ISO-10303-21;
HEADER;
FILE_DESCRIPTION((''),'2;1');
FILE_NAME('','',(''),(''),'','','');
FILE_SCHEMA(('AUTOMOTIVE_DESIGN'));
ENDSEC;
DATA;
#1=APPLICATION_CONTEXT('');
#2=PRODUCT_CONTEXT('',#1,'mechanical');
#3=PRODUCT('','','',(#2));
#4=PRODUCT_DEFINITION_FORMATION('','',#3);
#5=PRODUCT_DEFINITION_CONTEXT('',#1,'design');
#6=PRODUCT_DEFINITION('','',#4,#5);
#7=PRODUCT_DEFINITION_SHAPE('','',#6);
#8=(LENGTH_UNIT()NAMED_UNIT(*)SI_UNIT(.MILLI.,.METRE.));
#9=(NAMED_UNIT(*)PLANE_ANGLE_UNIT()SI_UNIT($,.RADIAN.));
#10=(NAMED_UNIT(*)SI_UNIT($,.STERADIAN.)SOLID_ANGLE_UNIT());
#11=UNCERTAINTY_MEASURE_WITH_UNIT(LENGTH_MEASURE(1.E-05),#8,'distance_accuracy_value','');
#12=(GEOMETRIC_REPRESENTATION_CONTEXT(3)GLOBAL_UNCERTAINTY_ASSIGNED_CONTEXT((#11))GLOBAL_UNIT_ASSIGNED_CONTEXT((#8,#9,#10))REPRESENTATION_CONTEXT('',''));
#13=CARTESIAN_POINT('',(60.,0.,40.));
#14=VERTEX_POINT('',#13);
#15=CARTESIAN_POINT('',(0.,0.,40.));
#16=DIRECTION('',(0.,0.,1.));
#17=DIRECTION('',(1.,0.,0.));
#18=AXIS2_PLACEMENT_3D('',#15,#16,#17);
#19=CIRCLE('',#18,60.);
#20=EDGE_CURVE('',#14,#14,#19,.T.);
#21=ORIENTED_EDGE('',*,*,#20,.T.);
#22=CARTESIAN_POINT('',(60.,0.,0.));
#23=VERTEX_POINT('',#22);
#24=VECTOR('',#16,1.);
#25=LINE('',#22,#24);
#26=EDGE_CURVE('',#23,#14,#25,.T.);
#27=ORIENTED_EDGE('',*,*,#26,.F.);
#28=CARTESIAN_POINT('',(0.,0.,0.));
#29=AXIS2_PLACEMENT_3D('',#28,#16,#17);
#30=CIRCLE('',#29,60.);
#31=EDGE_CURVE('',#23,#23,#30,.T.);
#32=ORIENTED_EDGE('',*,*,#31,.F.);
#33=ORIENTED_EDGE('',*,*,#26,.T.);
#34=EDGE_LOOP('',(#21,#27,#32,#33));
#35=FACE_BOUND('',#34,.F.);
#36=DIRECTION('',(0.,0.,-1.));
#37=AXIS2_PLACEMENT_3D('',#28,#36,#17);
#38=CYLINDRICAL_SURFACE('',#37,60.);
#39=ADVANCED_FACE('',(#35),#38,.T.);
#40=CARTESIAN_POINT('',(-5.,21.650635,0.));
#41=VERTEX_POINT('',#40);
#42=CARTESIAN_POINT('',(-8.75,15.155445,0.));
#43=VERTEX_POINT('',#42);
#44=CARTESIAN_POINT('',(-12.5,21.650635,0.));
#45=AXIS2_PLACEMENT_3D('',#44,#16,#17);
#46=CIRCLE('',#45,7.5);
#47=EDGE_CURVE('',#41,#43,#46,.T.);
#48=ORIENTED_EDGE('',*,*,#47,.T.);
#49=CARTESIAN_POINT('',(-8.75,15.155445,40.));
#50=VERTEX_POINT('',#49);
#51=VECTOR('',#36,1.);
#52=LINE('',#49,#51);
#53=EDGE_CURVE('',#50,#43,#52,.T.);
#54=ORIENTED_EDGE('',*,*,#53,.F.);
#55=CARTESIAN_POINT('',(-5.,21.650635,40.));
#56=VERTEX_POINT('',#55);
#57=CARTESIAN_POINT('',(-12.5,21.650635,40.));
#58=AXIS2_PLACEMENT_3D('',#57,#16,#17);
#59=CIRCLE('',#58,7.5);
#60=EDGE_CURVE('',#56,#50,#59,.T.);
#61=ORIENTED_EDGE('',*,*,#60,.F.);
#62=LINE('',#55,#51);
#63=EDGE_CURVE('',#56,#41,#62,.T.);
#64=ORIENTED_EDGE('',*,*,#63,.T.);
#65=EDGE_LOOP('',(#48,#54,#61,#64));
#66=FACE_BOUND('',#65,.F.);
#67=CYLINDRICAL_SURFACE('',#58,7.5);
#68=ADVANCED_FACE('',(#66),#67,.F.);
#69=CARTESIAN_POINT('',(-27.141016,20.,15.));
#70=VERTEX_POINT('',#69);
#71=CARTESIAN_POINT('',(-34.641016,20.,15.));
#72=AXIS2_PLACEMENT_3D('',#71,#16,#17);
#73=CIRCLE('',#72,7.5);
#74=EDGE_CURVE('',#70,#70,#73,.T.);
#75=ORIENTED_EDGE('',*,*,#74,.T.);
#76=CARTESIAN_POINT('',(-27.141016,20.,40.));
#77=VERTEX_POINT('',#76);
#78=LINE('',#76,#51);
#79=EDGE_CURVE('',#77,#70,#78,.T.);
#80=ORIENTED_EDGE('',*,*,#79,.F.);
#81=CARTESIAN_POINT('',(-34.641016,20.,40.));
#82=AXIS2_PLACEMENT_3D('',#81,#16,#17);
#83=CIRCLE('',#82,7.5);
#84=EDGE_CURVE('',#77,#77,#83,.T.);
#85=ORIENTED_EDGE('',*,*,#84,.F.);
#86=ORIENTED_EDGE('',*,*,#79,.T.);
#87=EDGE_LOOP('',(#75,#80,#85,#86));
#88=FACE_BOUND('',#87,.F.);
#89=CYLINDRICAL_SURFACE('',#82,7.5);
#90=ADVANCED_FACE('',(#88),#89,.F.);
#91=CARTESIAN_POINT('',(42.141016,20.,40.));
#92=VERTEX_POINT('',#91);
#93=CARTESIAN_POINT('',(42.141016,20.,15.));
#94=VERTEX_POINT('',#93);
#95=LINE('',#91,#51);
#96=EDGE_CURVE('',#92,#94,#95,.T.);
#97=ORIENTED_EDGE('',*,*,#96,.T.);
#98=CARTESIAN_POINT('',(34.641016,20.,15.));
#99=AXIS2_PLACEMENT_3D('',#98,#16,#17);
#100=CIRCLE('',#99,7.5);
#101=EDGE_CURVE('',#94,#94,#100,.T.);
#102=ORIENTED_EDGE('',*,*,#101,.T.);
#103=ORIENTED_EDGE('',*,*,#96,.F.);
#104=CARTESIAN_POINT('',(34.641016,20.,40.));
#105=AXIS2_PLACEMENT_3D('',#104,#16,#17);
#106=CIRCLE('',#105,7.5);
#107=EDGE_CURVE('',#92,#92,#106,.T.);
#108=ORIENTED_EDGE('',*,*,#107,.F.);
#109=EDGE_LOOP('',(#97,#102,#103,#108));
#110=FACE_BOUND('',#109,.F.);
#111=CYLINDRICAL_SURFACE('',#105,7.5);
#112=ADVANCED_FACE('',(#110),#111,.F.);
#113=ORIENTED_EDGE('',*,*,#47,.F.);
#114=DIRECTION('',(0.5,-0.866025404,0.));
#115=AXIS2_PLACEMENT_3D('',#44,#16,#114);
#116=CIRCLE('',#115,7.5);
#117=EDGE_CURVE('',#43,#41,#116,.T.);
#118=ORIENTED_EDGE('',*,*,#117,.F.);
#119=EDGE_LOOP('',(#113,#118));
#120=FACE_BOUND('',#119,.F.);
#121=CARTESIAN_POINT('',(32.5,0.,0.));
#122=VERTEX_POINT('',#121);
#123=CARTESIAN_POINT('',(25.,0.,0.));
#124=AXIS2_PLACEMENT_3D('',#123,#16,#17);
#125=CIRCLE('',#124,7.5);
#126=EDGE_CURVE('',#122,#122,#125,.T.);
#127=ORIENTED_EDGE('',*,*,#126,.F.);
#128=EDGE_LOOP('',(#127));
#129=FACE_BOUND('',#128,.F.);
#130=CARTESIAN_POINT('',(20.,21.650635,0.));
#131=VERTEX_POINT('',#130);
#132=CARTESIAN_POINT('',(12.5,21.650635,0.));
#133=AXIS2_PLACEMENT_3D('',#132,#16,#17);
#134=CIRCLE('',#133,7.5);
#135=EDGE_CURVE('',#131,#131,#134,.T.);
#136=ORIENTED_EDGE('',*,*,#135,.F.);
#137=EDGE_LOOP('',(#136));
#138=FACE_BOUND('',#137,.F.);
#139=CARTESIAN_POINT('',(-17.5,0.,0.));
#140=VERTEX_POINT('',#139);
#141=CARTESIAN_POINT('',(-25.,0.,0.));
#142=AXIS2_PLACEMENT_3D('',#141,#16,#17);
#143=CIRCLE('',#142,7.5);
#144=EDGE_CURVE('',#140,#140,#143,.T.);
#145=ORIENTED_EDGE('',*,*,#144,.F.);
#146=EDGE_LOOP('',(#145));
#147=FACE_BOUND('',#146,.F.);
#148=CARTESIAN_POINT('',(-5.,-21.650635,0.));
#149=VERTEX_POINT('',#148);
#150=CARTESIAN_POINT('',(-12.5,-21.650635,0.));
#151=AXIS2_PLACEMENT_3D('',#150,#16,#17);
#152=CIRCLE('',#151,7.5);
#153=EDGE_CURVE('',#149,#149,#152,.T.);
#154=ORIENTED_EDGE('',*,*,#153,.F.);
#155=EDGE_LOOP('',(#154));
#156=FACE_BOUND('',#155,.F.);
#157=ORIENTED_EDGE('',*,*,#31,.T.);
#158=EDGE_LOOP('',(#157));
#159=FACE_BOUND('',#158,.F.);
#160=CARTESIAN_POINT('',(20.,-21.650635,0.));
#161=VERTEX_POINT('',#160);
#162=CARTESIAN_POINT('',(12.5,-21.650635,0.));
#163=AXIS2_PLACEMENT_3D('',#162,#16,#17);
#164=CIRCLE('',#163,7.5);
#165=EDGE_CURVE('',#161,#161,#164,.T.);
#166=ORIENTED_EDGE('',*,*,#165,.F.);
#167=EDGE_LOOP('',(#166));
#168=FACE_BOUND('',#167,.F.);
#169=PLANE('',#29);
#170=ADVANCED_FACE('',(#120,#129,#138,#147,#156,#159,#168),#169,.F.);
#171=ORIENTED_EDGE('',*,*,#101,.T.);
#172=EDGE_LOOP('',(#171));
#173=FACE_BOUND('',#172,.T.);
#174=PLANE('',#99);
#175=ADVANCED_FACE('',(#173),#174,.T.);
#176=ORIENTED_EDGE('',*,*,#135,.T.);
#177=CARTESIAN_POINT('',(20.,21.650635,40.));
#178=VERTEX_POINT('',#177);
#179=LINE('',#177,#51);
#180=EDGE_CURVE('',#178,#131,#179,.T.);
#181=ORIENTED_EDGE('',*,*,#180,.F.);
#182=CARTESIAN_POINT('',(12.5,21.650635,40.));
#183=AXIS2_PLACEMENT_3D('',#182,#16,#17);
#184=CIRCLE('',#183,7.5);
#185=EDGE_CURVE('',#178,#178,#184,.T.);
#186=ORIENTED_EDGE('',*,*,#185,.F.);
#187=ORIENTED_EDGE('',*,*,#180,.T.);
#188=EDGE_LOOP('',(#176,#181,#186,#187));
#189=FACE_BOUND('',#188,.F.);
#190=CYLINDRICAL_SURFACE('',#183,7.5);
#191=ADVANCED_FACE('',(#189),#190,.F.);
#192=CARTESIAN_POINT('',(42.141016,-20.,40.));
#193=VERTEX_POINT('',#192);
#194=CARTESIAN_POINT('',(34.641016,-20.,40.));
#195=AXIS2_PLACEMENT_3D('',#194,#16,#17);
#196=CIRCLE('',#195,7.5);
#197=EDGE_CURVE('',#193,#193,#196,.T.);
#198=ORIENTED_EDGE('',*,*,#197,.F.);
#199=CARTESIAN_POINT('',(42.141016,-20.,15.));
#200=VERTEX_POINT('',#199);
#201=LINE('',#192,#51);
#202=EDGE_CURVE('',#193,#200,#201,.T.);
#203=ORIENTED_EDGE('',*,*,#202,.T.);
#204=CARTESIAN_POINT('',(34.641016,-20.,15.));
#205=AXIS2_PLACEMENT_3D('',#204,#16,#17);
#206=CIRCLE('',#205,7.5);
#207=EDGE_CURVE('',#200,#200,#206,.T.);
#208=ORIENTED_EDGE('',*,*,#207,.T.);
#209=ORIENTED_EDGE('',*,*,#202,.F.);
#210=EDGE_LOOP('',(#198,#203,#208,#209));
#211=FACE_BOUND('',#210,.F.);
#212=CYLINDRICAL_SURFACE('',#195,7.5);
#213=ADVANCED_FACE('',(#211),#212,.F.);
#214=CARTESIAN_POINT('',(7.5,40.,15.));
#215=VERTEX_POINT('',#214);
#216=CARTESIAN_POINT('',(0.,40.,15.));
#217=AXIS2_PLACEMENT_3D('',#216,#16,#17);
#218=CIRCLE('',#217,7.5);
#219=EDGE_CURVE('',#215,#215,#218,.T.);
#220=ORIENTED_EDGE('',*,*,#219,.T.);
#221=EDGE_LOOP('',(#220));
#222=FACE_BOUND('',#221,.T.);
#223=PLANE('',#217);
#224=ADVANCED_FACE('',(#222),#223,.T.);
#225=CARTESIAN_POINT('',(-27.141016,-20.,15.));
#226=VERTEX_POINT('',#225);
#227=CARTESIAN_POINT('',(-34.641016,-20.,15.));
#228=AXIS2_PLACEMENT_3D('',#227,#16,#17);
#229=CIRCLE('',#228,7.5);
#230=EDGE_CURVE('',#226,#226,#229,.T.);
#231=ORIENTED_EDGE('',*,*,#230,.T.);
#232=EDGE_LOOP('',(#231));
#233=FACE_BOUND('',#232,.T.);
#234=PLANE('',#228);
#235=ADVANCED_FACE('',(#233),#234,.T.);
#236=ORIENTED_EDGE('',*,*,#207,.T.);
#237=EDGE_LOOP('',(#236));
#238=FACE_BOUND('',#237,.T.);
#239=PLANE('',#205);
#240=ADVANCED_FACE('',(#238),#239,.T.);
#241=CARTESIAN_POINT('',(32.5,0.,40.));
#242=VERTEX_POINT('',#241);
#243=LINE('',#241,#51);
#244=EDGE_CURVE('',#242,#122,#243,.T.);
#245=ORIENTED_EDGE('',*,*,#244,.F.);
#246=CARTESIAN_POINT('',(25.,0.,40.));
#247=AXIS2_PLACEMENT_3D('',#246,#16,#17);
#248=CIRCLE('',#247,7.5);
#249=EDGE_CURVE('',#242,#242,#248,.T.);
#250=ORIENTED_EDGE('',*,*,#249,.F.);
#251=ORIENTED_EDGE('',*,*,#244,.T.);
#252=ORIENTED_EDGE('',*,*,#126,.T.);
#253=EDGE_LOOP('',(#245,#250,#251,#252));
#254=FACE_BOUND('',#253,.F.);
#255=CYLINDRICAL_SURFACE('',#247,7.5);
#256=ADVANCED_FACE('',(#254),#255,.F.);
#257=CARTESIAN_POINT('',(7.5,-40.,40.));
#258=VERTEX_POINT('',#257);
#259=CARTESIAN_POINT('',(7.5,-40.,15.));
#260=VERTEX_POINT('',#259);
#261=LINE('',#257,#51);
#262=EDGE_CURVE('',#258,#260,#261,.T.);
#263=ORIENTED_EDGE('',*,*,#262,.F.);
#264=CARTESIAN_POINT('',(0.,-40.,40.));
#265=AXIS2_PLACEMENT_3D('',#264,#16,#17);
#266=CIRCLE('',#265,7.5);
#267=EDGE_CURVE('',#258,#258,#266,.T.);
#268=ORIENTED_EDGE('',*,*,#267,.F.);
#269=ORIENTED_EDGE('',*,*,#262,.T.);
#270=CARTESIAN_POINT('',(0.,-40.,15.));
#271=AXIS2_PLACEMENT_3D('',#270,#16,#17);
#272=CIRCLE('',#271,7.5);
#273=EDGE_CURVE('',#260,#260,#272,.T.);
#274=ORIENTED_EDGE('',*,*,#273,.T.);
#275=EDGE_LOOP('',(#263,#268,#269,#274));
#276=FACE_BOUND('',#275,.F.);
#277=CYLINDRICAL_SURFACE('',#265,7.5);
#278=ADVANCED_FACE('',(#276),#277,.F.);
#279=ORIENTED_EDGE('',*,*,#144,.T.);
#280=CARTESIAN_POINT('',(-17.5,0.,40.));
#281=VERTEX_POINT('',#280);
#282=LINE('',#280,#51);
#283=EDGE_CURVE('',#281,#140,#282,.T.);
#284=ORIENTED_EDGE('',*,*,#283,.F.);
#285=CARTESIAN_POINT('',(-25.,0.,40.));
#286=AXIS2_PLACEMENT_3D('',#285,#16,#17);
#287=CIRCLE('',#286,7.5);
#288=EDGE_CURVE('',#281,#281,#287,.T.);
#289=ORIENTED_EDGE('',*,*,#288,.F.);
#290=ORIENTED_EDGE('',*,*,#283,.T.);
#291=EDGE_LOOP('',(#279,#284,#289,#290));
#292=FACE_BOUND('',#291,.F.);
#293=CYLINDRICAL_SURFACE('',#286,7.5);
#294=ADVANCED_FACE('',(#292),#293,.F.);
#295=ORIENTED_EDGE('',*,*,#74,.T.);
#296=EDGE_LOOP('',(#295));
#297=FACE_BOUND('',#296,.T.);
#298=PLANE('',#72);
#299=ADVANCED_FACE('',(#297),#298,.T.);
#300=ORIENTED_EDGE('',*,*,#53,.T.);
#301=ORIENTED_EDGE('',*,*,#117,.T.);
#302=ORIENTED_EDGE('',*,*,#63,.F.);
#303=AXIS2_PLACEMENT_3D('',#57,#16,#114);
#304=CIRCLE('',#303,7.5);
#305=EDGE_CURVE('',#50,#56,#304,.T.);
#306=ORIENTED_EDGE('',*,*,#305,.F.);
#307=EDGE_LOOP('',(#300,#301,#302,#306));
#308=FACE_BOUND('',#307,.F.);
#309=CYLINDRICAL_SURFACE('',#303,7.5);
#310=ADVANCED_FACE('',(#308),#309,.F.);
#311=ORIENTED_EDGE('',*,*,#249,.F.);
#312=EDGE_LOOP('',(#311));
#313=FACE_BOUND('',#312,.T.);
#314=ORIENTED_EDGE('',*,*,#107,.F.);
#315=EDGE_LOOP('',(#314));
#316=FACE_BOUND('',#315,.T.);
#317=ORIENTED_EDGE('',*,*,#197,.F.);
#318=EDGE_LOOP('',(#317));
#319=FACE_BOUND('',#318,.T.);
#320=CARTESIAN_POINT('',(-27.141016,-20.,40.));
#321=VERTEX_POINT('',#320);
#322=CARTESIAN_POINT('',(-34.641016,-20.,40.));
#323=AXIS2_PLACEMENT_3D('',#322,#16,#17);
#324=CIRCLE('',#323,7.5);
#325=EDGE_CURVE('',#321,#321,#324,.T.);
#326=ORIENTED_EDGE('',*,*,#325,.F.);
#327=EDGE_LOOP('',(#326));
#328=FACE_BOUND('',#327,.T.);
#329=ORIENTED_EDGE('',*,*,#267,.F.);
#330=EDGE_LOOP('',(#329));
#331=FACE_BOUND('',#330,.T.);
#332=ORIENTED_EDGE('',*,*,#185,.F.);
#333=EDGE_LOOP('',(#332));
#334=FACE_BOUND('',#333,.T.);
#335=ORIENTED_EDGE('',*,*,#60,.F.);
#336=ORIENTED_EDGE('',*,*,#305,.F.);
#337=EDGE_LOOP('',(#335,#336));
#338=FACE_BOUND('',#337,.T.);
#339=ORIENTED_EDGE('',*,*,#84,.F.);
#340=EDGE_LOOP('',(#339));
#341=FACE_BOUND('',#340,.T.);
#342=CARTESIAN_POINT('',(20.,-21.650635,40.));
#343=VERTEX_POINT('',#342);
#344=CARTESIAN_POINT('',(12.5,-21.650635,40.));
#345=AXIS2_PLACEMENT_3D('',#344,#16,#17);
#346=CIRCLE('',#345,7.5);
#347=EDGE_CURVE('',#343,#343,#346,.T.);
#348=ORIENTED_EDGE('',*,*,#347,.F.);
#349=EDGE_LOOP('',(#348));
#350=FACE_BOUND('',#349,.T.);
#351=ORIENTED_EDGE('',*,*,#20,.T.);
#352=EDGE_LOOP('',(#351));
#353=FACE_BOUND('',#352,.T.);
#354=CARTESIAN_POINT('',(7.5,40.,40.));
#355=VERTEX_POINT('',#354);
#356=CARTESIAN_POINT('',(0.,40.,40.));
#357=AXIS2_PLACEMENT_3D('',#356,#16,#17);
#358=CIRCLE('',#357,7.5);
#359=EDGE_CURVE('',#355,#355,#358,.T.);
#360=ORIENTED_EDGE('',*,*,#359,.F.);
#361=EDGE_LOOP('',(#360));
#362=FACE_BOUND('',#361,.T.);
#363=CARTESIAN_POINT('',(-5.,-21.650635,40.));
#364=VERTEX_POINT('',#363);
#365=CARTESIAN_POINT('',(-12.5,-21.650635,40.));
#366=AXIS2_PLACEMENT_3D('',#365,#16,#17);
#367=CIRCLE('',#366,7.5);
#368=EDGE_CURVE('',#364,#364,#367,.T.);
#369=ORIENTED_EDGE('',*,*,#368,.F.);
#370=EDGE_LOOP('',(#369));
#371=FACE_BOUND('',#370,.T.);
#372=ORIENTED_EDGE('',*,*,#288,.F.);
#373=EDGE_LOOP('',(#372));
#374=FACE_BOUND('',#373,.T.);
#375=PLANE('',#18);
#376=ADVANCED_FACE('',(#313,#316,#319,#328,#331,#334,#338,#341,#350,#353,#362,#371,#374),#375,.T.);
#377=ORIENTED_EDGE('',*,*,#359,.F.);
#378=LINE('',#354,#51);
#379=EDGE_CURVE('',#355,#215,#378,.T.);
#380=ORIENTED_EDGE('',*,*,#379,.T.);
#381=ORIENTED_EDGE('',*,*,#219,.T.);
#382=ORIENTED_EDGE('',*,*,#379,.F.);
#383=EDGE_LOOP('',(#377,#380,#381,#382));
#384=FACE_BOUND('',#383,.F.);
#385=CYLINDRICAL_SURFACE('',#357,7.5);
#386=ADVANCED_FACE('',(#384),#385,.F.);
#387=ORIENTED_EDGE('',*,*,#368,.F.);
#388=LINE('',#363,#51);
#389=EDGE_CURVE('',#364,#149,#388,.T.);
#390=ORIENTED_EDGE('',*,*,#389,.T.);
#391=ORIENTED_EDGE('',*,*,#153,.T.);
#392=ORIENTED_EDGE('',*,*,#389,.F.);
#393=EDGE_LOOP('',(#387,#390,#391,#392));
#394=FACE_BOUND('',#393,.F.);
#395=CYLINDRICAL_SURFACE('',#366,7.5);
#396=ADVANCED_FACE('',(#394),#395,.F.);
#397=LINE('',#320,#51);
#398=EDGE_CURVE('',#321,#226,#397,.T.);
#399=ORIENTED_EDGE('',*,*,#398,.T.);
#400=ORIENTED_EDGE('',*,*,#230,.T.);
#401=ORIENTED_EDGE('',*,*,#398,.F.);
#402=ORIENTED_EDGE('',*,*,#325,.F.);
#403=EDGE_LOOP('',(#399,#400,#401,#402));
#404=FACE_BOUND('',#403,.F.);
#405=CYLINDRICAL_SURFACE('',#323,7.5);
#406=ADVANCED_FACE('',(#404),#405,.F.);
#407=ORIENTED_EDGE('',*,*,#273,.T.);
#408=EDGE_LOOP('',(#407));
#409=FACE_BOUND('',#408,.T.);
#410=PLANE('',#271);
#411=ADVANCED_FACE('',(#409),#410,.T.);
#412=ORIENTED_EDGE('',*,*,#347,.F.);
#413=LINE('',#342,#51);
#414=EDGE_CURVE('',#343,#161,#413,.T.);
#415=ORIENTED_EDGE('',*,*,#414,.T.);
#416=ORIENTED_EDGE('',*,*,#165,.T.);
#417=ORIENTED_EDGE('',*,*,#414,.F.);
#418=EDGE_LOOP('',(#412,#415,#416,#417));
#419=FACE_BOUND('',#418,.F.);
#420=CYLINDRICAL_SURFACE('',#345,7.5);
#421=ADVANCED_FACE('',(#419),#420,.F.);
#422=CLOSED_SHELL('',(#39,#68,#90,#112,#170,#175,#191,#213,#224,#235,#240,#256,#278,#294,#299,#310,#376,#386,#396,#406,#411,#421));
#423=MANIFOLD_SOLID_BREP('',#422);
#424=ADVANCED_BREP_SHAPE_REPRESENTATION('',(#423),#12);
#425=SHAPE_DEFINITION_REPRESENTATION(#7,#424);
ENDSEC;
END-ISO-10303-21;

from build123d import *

# Parameters (mm, degrees)
F0_R     = 60
F1_DEPTH = 40
F2_R     = 7.5
F3_DEPTH = 25
F4_R     = 7.5
F5_DEPTH = 40.001


# Not quite as in the source:
# - a feature names something its author has since deleted; it is built from what else it names


with BuildPart() as f1:
    # F0 (on Top) → F1 (new body)
    with BuildSketch(Plane.XY):
        Circle(F0_R)
    extrude(amount=F1_DEPTH)

    # F2 (on face) → F3 (cut)
    with BuildSketch(Plane.XY.offset(40)):
        with Locations((-34.6410161514, 20)):
            Circle(F2_R)
        with Locations((0, 40)):
            Circle(F2_R)
        with Locations((34.6410161514, 20)):
            Circle(F2_R)
        with Locations((34.6410161514, -20)):
            Circle(F2_R)
        with Locations((0, -40)):
            Circle(F2_R)
        with Locations((-34.6410161514, -20)):
            Circle(F2_R)
    extrude(amount=-F3_DEPTH, mode=Mode.SUBTRACT)

    # F4 (on face) → F5 (cut, through all)
    with BuildSketch(Plane.XY.offset(40)):
        with Locations((-25, 0)):
            Circle(F4_R)
        with Locations((-12.5, -21.6506350946)):
            Circle(F4_R)
        with Locations((12.5, -21.6506350946)):
            Circle(F4_R)
        with Locations((25, 0)):
            Circle(F4_R)
        with Locations((12.5, 21.6506350946)):
            Circle(F4_R)
        with BuildLine():
            ThreePointArc((-8.75, 15.1554445662), (-6.0048094716, 17.9006350946), (-5, 21.6506350946))
            ThreePointArc((-5, 21.6506350946), (-18.9951905284, 25.4006350946), (-8.75, 15.1554445662))
        make_face()
    extrude(amount=-F5_DEPTH, mode=Mode.SUBTRACT)


solid = f1.part
